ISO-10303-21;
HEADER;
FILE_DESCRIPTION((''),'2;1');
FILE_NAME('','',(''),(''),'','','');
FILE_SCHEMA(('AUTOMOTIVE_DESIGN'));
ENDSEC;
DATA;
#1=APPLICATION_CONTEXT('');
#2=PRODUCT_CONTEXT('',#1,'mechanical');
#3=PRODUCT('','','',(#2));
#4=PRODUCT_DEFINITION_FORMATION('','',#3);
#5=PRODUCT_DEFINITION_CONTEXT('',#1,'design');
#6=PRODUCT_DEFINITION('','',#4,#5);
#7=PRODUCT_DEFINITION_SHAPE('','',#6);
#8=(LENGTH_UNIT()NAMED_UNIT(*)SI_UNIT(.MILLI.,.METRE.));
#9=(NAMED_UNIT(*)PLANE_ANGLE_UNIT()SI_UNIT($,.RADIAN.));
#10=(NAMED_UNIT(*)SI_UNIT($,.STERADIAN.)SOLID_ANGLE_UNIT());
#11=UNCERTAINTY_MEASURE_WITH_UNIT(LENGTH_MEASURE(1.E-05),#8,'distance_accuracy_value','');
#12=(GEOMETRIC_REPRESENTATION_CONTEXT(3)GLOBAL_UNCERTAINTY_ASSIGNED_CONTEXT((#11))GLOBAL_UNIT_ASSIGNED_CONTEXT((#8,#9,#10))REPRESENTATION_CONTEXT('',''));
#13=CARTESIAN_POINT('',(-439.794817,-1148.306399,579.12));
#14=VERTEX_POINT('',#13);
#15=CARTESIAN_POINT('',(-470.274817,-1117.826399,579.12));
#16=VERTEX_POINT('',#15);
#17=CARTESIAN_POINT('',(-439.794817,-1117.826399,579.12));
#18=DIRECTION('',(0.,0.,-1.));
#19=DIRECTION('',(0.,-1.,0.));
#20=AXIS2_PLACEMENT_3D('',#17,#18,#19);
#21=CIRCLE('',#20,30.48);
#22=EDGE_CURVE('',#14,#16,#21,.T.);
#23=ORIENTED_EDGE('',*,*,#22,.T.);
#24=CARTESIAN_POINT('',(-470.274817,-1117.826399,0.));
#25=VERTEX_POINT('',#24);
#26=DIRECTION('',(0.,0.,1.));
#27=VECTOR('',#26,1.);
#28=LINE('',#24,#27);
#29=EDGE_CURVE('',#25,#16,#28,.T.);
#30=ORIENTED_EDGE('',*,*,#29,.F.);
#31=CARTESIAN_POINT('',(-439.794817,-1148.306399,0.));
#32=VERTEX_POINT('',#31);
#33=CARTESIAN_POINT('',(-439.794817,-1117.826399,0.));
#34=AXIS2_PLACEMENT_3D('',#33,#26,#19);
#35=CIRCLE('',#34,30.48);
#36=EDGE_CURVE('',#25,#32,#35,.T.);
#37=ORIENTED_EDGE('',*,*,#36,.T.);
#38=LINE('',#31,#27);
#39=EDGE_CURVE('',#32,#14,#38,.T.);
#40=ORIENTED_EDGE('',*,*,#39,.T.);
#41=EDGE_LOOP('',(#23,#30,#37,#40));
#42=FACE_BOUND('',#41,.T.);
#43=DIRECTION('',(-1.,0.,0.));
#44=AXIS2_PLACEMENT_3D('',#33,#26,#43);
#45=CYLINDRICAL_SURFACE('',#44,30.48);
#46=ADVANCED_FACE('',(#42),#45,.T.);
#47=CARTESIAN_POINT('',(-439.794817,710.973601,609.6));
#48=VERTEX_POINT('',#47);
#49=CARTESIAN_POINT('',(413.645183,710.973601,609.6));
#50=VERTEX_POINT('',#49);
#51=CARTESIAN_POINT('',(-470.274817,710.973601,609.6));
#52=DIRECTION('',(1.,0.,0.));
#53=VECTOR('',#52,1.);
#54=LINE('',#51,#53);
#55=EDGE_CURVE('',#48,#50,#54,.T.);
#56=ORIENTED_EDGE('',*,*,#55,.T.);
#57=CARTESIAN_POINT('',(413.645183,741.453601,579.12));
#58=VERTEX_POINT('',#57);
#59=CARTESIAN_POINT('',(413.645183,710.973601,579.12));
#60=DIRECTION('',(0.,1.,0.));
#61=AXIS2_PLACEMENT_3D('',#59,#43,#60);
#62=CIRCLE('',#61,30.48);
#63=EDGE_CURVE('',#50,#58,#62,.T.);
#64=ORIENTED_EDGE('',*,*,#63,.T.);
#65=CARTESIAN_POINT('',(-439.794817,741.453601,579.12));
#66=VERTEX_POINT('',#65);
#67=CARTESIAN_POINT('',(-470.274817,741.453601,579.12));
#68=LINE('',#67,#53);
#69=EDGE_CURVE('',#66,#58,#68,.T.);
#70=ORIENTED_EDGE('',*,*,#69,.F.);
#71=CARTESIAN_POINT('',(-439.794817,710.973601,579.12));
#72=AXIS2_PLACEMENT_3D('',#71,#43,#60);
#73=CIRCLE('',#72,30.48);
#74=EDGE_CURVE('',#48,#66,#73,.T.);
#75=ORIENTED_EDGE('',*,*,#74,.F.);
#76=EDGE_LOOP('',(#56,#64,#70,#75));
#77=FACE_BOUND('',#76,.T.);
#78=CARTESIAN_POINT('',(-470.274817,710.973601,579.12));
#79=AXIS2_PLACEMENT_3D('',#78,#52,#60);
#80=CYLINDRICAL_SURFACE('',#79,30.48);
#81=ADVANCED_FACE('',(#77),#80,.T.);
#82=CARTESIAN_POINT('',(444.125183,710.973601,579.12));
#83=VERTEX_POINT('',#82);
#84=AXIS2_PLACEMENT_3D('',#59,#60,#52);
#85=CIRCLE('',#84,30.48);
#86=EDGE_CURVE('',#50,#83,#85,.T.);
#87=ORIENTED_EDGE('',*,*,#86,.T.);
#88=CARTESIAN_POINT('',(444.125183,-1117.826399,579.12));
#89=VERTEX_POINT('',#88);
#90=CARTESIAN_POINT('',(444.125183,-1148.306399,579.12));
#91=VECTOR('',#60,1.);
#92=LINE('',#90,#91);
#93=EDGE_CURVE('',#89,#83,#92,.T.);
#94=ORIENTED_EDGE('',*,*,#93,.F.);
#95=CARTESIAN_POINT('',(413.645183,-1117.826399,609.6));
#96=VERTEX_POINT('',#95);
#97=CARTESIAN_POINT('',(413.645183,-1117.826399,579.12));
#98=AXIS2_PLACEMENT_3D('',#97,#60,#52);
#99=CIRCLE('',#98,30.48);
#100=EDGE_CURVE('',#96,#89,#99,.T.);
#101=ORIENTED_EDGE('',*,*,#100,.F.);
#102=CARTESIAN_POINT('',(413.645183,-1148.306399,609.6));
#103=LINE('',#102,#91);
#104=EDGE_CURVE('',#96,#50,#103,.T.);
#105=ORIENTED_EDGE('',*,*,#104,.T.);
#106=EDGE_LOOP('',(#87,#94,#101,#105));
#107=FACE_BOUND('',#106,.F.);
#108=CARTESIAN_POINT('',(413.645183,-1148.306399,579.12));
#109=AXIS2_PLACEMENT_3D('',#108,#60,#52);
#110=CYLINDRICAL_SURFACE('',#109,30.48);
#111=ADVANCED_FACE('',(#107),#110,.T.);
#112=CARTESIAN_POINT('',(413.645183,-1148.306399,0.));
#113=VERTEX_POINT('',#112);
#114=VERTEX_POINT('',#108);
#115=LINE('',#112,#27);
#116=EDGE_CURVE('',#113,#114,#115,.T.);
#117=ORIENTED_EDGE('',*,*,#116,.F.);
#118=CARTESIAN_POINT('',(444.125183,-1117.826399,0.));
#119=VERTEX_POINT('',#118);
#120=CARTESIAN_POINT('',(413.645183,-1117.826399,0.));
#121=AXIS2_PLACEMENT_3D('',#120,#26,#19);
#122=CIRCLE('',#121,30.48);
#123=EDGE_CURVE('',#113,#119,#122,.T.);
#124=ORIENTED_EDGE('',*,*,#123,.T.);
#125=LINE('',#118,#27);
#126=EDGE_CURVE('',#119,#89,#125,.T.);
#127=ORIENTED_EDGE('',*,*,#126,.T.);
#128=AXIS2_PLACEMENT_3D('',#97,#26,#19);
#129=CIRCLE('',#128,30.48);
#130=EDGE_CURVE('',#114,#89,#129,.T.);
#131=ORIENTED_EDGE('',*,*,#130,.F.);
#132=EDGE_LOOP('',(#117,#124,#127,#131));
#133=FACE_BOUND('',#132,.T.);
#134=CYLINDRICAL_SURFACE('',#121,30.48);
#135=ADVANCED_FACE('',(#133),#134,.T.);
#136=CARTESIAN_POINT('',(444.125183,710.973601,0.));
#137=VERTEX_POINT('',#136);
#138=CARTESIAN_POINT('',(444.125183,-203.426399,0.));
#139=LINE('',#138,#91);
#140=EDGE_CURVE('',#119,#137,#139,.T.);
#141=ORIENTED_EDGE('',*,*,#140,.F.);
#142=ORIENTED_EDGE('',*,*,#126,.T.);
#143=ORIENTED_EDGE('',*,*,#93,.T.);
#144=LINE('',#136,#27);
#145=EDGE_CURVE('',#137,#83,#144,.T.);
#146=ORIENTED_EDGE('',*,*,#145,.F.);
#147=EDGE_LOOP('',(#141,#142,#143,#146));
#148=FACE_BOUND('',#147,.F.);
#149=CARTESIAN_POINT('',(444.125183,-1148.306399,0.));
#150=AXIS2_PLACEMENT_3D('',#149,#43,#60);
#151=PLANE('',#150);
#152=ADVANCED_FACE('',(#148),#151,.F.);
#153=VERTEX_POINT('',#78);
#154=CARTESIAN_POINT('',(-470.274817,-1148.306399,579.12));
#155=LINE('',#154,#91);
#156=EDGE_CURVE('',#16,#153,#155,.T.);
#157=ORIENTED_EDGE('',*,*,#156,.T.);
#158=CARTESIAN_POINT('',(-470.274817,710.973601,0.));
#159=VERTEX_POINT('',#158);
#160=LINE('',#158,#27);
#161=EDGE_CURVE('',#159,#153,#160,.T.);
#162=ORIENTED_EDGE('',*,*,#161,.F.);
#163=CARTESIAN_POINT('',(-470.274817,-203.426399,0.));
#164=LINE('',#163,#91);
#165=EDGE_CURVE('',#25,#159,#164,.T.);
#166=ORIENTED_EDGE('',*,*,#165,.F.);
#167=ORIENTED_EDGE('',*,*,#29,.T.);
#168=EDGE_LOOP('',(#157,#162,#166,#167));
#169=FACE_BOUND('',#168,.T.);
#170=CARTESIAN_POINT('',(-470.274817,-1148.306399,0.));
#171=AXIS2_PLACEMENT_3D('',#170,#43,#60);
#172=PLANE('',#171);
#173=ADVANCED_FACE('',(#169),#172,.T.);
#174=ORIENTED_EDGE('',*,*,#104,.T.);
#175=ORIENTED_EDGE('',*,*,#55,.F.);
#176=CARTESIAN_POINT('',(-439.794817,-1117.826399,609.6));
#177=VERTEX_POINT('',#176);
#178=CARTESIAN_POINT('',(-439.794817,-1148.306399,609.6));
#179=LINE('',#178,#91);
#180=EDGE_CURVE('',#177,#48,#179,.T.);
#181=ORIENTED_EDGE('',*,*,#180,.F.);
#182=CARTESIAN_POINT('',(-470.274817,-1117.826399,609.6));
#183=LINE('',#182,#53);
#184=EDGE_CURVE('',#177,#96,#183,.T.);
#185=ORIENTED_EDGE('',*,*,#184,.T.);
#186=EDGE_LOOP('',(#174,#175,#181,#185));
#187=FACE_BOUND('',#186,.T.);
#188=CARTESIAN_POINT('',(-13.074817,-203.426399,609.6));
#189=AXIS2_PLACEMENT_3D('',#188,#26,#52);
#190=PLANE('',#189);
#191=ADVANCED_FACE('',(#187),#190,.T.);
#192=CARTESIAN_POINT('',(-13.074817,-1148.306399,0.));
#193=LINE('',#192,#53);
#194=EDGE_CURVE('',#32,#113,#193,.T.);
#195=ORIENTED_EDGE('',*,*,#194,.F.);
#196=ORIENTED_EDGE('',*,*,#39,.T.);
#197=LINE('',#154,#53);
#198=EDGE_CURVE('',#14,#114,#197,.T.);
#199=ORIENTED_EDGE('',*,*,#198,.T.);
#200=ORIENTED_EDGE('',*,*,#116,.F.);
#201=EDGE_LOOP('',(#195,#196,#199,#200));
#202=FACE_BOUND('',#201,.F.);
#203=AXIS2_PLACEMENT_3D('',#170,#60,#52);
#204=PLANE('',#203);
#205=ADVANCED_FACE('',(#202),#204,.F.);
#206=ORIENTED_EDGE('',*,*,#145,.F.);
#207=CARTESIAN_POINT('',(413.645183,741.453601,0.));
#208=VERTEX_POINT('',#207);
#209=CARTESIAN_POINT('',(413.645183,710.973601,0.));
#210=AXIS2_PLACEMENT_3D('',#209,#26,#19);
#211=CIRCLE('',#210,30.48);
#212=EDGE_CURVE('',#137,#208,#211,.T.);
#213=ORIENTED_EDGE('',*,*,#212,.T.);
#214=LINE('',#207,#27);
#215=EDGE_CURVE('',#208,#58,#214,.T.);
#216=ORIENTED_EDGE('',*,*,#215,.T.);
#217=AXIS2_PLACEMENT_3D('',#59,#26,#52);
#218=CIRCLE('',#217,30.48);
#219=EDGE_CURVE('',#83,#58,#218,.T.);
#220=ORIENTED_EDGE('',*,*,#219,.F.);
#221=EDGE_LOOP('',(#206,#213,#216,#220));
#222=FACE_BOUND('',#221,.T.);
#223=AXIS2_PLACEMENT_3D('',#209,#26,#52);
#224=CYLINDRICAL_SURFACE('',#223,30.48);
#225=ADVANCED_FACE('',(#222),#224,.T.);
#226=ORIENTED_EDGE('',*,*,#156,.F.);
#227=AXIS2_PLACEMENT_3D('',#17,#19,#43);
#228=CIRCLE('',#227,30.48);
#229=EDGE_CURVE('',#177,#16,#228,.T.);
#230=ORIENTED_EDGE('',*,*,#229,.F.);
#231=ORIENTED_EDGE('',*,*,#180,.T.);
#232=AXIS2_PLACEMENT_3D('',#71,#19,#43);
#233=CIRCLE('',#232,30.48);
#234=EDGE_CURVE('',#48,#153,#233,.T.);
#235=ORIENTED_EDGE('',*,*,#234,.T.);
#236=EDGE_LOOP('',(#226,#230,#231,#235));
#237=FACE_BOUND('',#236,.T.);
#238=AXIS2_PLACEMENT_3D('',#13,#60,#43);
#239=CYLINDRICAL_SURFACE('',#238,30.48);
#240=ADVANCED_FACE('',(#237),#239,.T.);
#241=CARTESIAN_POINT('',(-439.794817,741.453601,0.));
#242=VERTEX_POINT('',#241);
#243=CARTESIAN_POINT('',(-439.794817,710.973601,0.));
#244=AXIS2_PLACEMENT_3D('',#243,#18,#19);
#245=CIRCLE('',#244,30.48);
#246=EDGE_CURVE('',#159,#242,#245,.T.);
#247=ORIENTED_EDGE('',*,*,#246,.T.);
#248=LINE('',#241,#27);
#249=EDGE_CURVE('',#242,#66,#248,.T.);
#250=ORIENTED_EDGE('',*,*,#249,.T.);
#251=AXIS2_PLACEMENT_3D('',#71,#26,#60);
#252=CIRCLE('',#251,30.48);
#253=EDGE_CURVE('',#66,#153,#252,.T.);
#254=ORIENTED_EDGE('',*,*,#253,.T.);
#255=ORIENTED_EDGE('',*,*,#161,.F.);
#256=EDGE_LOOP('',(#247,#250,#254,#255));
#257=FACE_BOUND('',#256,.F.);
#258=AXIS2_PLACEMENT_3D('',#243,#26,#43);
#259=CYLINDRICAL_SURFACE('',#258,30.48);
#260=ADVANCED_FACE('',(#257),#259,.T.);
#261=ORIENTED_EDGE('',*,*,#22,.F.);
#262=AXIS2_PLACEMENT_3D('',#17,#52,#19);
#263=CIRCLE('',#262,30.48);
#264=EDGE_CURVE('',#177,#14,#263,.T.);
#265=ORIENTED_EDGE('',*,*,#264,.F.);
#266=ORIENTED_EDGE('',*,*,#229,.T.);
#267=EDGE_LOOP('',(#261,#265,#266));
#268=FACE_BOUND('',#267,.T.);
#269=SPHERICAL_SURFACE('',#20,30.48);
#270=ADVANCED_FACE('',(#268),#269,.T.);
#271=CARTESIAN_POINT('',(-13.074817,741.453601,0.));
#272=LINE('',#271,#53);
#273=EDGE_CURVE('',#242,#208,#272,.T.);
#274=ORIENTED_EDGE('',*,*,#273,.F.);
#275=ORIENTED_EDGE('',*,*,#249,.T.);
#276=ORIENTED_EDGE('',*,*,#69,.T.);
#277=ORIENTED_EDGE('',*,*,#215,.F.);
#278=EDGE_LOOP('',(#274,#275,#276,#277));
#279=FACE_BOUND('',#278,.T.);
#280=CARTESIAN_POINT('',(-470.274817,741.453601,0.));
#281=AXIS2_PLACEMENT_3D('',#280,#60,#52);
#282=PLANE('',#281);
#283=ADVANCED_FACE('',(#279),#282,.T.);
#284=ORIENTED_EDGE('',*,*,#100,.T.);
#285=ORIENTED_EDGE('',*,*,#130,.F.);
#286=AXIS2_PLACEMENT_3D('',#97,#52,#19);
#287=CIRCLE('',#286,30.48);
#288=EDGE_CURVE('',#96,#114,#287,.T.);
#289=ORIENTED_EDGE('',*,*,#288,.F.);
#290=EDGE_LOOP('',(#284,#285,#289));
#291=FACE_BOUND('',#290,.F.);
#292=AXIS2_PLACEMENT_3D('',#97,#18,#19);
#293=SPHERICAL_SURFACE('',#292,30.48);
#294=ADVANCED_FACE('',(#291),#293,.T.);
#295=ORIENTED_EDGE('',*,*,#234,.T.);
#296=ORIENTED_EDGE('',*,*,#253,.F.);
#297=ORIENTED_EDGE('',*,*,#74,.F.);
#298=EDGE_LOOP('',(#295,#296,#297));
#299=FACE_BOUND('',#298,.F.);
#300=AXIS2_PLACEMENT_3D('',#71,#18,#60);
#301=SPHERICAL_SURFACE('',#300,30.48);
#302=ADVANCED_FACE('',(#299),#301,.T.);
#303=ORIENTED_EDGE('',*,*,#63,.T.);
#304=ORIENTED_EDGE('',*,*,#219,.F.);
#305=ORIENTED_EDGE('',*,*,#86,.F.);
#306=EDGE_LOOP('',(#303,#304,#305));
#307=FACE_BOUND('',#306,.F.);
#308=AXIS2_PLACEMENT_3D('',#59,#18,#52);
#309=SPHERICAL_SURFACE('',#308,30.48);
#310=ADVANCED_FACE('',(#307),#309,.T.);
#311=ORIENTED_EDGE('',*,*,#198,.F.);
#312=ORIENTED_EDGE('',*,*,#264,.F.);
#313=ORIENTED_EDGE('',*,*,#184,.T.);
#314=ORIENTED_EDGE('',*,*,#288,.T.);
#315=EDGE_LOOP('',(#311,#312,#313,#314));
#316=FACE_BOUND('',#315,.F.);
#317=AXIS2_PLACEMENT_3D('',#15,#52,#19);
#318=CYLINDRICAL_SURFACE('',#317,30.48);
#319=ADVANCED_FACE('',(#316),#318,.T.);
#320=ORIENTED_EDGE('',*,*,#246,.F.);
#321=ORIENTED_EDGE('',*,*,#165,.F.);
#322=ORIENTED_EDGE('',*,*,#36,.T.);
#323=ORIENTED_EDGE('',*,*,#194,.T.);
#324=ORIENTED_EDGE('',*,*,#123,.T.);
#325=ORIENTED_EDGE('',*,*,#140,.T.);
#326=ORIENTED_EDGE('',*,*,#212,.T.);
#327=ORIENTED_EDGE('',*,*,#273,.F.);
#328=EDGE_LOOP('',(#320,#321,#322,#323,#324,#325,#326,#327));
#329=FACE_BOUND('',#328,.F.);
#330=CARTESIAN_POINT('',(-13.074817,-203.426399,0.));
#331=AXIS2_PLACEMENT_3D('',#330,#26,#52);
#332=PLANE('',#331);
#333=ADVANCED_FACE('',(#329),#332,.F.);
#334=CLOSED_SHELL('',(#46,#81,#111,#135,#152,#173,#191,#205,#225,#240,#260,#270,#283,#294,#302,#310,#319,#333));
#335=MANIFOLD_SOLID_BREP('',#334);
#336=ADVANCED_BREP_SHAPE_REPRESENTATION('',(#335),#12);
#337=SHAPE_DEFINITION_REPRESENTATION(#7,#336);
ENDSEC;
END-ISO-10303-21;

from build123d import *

# Parameters (mm, degrees)
F0_W     = 914.4
F0_H     = 1889.76
F1_DEPTH = 609.6
F3_R     = 30.48


# Not quite as in the source:
# - a feature of the source that left no trace in its solid (it failed there, or was rolled back) is left out


with BuildPart() as f1:
    # F0 (on Top) → F1 (new body)
    with BuildSketch(Plane.XY):
        with Locations((-13.0748171359, -203.4263992494)):
            Rectangle(F0_W, F0_H)
    extrude(amount=F1_DEPTH)

    # F3
    f3_edges = [f1.edges().sort_by_distance(p)[0] for p in [
        (-470.274817, -1148.306399, 304.8),
        (444.125183, -1148.306399, 304.8),
        (-13.074817, -1148.306399, 609.6),
        (444.125183, 741.453601, 304.8),
        (444.125183, -203.426399, 609.6),
        (-470.274817, 741.453601, 304.8),
        (-13.074817, 741.453601, 609.6),
        (-470.274817, -203.426399, 609.6),
    ]]
    fillet(f3_edges, radius=F3_R)


solid = f1.part
